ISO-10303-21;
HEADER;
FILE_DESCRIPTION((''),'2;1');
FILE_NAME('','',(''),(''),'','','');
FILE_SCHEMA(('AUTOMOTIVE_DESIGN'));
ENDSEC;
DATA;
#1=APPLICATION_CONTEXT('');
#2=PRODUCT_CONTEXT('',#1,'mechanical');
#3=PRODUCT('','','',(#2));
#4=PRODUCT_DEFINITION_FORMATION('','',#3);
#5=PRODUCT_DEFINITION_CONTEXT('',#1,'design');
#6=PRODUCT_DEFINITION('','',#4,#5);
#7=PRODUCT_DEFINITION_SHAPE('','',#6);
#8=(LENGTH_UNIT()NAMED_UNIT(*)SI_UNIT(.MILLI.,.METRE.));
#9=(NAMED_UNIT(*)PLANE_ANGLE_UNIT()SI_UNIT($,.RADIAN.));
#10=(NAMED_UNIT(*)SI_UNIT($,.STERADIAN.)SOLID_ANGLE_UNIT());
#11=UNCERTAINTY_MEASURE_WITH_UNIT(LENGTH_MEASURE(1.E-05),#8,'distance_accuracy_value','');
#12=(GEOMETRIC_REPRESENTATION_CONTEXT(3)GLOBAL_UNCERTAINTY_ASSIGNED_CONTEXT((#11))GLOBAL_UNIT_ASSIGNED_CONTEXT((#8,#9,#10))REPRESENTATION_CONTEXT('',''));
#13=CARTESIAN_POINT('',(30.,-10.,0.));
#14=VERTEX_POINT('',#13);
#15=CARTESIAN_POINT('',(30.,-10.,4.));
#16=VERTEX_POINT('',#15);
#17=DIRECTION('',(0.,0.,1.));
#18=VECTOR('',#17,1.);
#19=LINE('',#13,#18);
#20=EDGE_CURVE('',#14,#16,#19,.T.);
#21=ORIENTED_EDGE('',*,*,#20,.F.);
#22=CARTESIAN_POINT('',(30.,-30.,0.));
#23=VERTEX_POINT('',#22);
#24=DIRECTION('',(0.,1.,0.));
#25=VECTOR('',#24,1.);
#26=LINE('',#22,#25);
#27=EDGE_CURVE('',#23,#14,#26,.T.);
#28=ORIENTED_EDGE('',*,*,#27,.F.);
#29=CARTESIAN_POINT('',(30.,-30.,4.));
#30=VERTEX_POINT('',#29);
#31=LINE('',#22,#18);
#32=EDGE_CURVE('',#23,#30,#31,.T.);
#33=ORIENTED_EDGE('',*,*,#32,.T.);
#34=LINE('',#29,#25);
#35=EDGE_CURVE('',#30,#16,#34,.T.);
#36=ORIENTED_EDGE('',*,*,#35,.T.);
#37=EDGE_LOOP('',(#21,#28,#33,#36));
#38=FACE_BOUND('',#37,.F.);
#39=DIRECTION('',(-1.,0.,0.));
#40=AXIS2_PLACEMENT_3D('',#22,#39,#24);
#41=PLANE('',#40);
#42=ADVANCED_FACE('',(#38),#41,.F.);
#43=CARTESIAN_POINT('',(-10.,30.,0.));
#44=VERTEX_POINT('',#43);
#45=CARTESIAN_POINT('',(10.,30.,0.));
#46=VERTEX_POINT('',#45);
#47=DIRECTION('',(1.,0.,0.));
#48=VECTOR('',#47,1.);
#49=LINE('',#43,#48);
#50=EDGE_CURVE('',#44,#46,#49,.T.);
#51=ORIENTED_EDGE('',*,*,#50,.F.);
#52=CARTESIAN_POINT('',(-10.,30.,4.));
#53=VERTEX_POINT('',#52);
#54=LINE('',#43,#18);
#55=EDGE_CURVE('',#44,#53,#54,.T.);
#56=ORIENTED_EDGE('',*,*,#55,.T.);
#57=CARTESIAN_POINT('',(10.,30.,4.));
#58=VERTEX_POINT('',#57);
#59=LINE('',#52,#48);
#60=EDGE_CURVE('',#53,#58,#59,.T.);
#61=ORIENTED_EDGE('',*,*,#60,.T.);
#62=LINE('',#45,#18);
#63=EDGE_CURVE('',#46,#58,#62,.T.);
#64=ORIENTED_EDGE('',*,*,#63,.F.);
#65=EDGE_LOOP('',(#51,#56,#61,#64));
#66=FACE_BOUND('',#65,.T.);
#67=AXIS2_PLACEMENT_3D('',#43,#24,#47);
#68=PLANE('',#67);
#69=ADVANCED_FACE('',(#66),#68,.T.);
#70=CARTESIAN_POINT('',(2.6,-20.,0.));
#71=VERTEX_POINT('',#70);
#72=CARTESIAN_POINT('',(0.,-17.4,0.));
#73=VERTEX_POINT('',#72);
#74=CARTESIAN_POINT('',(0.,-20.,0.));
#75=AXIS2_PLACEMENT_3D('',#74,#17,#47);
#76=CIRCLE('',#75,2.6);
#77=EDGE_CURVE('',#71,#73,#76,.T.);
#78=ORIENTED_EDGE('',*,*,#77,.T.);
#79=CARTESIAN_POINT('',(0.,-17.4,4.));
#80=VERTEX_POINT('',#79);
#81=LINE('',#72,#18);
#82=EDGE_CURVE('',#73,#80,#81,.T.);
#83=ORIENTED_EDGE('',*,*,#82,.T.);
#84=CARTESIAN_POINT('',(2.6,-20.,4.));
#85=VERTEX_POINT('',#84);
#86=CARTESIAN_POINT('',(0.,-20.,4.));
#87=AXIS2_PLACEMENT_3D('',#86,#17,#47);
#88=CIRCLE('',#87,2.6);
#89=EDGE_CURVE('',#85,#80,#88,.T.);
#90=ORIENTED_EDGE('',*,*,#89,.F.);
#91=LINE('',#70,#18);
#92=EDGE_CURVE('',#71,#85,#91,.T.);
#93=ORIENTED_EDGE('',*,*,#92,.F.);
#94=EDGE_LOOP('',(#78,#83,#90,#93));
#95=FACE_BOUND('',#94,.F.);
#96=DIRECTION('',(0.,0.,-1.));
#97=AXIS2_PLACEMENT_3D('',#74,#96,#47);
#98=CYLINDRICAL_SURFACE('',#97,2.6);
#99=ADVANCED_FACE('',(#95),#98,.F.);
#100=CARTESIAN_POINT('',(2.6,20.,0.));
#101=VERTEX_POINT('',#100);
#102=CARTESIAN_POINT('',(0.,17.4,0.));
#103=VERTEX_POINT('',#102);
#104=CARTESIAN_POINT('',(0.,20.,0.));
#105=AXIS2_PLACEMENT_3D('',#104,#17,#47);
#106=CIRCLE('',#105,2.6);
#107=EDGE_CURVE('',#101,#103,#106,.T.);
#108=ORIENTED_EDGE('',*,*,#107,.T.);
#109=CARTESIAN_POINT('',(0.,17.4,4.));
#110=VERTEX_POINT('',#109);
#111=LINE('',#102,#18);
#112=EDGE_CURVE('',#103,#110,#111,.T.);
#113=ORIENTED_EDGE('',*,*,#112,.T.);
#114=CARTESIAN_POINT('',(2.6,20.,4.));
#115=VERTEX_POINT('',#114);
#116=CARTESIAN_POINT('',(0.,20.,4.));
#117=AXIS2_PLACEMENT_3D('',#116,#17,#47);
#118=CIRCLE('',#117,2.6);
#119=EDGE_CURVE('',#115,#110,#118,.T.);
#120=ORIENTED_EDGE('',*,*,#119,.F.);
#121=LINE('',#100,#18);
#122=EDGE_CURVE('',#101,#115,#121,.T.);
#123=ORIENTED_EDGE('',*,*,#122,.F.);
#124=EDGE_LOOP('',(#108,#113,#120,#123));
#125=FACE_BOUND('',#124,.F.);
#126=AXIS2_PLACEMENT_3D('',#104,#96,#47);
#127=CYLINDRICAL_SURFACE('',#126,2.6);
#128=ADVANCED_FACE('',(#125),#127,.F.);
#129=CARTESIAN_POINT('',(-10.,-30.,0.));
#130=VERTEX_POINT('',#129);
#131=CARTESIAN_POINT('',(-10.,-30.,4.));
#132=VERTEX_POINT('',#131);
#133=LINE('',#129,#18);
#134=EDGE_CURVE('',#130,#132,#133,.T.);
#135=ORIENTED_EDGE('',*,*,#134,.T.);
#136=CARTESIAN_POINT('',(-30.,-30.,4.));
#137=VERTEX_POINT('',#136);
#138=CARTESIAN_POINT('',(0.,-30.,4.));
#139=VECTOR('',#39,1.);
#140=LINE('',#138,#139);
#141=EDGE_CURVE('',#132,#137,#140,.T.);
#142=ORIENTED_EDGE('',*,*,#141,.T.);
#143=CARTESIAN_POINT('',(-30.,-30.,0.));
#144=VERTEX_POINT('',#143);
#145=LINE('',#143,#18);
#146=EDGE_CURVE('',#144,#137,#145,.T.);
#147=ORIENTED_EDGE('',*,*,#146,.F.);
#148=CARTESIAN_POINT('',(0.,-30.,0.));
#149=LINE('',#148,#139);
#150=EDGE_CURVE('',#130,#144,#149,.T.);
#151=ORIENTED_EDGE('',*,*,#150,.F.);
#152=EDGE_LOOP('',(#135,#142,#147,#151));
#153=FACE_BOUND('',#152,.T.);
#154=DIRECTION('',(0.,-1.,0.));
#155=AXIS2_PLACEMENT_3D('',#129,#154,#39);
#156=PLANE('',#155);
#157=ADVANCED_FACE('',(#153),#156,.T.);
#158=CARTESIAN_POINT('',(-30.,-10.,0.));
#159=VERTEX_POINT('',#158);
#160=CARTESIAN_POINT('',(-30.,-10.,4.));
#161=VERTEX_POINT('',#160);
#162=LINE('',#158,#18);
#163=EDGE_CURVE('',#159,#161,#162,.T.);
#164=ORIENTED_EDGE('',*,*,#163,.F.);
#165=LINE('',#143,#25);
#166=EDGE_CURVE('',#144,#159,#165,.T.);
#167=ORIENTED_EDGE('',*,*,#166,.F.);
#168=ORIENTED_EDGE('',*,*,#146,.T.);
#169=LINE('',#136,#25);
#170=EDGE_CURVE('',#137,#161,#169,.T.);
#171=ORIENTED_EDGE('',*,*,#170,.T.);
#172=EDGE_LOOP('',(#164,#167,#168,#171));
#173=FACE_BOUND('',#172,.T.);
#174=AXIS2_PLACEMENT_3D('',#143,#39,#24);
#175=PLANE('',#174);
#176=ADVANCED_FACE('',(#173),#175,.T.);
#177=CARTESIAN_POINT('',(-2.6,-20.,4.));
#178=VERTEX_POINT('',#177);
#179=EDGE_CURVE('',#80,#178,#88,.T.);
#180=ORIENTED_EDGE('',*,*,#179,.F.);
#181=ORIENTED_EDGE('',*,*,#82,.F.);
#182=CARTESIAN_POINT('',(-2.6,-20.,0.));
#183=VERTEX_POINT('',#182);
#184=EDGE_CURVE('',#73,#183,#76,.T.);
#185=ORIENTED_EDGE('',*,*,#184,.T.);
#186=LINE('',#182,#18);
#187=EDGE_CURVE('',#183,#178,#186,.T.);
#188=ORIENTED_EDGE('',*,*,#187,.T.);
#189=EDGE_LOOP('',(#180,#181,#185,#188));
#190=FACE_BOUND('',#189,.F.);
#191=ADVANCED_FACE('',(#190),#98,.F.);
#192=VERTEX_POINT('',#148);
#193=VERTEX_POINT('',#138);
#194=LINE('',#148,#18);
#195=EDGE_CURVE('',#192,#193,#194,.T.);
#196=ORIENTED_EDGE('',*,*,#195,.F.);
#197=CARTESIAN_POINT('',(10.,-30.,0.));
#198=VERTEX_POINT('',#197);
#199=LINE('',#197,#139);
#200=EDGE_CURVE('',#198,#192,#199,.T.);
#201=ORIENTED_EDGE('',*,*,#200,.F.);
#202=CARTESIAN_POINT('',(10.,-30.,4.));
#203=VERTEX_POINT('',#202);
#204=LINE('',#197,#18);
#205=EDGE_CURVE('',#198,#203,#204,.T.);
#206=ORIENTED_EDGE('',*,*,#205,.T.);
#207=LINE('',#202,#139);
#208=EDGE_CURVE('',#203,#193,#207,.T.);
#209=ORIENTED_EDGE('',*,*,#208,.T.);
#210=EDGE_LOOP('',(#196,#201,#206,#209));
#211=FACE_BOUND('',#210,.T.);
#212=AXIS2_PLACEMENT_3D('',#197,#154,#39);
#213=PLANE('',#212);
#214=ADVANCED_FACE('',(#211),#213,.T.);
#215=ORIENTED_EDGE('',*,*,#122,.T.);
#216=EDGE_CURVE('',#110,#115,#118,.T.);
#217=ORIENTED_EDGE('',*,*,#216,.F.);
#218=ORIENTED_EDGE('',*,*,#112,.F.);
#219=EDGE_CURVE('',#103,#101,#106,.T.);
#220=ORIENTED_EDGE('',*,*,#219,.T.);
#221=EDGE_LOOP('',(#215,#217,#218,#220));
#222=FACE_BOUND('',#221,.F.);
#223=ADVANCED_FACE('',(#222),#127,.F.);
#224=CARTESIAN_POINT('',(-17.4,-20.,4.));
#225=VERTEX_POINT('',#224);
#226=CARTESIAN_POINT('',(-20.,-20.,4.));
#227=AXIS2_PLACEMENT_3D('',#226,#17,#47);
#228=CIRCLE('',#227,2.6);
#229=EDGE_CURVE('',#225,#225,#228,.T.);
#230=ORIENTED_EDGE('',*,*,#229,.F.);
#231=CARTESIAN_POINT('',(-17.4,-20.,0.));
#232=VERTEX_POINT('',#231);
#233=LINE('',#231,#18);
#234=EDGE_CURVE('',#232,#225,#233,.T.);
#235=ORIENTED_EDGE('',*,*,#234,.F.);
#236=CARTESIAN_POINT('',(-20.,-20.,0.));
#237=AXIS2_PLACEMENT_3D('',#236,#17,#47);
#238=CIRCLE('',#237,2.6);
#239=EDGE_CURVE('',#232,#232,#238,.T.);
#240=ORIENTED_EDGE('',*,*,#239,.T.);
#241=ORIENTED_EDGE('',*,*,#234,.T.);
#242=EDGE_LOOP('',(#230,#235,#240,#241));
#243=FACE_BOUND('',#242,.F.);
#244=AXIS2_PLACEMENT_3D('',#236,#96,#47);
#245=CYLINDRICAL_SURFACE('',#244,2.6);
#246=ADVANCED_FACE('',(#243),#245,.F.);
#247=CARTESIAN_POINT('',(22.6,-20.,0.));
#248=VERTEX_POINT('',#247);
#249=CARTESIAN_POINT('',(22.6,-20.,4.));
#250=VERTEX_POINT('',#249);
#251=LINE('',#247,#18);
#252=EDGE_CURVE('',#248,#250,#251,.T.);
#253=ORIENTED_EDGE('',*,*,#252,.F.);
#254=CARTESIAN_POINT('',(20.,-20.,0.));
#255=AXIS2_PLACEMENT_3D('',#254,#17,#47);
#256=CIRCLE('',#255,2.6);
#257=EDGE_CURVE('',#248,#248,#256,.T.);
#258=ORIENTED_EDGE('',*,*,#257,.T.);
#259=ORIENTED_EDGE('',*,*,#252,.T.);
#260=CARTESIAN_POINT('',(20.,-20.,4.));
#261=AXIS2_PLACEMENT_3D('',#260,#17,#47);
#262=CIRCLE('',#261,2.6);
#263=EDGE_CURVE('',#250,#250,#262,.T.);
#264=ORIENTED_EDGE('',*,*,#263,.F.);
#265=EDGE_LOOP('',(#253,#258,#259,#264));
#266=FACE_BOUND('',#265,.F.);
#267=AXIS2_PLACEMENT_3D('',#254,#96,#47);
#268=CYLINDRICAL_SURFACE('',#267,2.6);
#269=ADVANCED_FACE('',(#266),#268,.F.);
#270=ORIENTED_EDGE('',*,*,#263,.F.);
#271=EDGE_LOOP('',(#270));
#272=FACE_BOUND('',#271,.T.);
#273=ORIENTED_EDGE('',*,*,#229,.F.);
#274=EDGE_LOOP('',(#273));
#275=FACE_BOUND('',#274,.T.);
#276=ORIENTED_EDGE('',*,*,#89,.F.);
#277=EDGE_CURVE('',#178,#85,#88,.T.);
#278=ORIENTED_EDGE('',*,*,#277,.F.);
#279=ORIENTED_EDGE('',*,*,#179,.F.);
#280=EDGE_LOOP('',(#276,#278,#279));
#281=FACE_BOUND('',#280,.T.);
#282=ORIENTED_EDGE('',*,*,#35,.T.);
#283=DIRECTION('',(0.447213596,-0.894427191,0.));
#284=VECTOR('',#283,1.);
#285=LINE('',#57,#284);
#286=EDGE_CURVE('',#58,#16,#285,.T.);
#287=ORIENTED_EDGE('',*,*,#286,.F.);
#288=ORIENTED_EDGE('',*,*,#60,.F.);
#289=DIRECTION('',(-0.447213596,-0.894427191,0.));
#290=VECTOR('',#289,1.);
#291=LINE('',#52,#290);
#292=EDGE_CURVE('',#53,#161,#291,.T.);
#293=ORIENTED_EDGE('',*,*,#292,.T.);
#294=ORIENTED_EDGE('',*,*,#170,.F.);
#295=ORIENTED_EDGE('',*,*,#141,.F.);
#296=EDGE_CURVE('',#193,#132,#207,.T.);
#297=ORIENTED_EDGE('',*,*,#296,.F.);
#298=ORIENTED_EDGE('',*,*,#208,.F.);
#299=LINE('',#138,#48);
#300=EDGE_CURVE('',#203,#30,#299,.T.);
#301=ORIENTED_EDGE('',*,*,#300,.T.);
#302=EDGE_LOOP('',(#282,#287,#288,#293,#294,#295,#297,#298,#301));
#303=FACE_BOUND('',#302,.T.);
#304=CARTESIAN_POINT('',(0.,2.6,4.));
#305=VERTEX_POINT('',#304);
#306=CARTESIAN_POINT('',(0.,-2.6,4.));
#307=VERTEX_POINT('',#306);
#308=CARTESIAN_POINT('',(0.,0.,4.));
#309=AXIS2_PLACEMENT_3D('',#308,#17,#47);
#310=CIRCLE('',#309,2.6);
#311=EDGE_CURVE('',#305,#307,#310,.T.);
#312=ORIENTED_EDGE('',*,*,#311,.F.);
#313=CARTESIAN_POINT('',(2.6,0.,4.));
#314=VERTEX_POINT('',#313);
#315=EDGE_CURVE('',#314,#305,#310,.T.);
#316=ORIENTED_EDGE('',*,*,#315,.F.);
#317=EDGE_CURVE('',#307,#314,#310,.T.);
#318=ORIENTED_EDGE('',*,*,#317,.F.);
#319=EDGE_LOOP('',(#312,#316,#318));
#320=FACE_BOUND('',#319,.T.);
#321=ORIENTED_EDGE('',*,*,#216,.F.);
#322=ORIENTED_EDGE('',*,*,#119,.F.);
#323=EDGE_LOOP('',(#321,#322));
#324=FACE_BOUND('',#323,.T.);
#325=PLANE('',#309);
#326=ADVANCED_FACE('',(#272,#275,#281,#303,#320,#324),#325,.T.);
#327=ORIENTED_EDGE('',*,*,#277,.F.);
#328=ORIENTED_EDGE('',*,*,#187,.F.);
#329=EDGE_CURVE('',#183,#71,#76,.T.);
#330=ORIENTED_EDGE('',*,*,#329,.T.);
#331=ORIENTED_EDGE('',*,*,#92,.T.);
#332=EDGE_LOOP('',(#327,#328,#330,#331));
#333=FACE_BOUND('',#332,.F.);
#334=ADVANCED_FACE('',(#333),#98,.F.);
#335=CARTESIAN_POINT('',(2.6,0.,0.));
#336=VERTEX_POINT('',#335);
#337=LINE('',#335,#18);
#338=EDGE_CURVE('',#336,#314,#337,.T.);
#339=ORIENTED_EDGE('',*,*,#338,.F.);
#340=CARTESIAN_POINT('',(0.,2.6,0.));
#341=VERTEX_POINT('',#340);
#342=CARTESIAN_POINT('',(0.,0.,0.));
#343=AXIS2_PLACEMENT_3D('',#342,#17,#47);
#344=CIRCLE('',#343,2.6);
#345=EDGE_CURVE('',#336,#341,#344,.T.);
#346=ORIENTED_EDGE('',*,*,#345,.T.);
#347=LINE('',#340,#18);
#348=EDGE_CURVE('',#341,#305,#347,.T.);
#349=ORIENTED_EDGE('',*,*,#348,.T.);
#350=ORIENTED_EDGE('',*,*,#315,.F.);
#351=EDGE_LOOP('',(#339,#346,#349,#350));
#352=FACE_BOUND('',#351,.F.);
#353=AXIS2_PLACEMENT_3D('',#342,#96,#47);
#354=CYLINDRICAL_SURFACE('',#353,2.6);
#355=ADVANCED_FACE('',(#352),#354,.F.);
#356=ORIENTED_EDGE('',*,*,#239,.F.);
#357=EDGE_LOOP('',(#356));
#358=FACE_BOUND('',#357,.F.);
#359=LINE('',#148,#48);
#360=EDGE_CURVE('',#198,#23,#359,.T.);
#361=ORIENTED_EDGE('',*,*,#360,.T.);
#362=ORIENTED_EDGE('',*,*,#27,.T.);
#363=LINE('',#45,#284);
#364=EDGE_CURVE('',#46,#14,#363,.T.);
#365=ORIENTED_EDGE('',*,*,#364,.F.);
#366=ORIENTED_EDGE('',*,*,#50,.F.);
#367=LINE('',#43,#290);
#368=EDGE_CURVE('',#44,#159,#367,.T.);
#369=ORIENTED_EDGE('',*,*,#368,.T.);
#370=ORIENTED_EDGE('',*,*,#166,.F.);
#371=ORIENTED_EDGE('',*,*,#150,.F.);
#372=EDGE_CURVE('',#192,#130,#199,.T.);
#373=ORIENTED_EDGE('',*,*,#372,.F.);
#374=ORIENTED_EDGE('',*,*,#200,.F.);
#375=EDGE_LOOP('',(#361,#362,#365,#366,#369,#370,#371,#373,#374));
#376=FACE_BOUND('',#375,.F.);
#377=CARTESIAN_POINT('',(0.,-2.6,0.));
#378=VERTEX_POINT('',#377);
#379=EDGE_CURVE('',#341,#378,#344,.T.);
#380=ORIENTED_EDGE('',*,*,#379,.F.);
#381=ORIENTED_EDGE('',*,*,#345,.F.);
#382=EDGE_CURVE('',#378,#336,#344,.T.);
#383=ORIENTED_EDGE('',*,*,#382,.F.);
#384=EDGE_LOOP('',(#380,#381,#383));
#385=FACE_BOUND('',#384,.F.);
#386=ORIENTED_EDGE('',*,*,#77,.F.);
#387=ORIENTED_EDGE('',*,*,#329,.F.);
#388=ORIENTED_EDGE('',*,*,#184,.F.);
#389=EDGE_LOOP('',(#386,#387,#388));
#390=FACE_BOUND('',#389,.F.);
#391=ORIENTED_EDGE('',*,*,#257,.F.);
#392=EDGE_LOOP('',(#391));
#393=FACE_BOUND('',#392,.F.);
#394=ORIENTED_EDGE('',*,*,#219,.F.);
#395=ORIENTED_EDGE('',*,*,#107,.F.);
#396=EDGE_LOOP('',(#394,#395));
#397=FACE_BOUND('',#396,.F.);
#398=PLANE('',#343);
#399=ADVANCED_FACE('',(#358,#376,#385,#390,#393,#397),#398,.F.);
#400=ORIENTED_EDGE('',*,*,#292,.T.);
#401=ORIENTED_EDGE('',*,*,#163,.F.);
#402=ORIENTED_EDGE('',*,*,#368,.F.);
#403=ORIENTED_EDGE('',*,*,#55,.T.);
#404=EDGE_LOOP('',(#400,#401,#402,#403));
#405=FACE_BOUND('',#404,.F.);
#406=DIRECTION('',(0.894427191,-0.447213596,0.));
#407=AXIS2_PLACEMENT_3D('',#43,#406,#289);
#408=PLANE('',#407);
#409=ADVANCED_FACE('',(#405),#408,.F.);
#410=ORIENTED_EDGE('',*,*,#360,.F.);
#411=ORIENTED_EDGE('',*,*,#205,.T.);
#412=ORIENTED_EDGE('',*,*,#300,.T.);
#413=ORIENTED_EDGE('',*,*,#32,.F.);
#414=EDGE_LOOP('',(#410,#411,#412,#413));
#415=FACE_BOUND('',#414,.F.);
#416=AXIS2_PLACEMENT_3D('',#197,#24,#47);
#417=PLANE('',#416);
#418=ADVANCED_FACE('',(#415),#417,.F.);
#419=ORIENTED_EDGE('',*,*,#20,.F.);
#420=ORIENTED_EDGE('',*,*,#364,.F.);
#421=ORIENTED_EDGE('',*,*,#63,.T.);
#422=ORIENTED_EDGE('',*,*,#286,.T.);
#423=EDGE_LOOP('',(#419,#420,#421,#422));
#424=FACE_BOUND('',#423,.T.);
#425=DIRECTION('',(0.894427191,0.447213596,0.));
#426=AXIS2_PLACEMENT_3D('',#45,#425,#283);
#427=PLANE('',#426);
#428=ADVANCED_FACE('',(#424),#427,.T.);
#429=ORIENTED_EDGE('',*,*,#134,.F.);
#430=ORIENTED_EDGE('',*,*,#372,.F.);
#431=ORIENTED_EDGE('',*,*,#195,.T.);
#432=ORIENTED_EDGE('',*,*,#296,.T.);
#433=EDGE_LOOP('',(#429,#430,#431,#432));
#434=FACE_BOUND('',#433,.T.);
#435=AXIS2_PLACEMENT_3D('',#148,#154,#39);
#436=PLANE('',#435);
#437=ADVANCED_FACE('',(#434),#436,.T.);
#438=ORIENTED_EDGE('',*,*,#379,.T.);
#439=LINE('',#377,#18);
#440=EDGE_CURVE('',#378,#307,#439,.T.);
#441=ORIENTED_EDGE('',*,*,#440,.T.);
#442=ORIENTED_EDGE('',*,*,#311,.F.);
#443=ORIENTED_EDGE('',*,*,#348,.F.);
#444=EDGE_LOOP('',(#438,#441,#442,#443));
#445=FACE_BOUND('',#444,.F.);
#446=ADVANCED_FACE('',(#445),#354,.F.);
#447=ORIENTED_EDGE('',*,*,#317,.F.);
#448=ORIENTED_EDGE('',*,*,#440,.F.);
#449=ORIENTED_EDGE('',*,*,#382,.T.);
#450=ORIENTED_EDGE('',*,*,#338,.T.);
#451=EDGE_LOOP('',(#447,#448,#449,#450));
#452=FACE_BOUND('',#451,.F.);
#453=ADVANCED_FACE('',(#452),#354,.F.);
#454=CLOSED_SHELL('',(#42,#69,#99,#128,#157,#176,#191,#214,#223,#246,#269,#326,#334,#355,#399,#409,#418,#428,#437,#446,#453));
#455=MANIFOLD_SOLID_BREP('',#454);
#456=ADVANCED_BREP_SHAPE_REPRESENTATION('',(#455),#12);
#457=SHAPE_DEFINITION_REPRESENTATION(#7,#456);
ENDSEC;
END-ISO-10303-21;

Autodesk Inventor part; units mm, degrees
ref_plane "YZ Plane" through (0, 0, 0) normal (1, 0, 0) x (0, 1, 0)
ref_plane "XZ Plane" through (0, 0, 0) normal (0, 1, 0) x (-1, 0, 0)
ref_plane "XY Plane" through (0, 0, 0) normal (0, 0, 1) x (1, 0, 0)
sketch "Sketch1" plane through (0, 0, 0) normal (0, 0, 1) x (1, 0, 0)
  line L0 (10, -30) -> (-10, -30)
  line L1 (-10, 30) -> (10, 30)
  line L2 (0, -30) -> (-30, -30)
  line L3 (0, -30) -> (30, -30)
  line L4 (30, -30) -> (30, -10)
  line L5 (-30, -30) -> (-30, -10)
  line L6 (-10, 30) -> (-30, -10)
  line L7 (10, 30) -> (30, -10)
  circle A0 centre (0, 0) radius 2.6
  line L8 (0, 0) -> (0, 20)
  line L9 (0, 0) -> (20, 0) construction
  circle A1 centre (0, 20) radius 2.6
  line L10 (0, 0) -> (0, -20)
  circle A2 centre (0, -20) radius 2.6
  line L11 (0, -20) -> (-20, -20)
  line L12 (0, -20) -> (20, -20) construction
  circle A3 centre (-20, -20) radius 2.6
  circle A4 centre (20, -20) radius 2.6
  dimension "d7" = 60
  dimension "d8" = 5.2
  dimension "d9" = 20
  dimension "d10" = 90
  dimension "d11" = 5.2
  dimension "d12" = 20
  dimension "d13" = 5.2
  dimension "d14" = 20
  dimension "d15" = 180
  dimension "d16" = 5.2
  dimension "d17" = 5.2
extrude "Extrusion1" add sketch "Sketch1" along normal blind 4
properties part number "2020 T Plate Bracket Connectors" material "Aluminum 6061"
